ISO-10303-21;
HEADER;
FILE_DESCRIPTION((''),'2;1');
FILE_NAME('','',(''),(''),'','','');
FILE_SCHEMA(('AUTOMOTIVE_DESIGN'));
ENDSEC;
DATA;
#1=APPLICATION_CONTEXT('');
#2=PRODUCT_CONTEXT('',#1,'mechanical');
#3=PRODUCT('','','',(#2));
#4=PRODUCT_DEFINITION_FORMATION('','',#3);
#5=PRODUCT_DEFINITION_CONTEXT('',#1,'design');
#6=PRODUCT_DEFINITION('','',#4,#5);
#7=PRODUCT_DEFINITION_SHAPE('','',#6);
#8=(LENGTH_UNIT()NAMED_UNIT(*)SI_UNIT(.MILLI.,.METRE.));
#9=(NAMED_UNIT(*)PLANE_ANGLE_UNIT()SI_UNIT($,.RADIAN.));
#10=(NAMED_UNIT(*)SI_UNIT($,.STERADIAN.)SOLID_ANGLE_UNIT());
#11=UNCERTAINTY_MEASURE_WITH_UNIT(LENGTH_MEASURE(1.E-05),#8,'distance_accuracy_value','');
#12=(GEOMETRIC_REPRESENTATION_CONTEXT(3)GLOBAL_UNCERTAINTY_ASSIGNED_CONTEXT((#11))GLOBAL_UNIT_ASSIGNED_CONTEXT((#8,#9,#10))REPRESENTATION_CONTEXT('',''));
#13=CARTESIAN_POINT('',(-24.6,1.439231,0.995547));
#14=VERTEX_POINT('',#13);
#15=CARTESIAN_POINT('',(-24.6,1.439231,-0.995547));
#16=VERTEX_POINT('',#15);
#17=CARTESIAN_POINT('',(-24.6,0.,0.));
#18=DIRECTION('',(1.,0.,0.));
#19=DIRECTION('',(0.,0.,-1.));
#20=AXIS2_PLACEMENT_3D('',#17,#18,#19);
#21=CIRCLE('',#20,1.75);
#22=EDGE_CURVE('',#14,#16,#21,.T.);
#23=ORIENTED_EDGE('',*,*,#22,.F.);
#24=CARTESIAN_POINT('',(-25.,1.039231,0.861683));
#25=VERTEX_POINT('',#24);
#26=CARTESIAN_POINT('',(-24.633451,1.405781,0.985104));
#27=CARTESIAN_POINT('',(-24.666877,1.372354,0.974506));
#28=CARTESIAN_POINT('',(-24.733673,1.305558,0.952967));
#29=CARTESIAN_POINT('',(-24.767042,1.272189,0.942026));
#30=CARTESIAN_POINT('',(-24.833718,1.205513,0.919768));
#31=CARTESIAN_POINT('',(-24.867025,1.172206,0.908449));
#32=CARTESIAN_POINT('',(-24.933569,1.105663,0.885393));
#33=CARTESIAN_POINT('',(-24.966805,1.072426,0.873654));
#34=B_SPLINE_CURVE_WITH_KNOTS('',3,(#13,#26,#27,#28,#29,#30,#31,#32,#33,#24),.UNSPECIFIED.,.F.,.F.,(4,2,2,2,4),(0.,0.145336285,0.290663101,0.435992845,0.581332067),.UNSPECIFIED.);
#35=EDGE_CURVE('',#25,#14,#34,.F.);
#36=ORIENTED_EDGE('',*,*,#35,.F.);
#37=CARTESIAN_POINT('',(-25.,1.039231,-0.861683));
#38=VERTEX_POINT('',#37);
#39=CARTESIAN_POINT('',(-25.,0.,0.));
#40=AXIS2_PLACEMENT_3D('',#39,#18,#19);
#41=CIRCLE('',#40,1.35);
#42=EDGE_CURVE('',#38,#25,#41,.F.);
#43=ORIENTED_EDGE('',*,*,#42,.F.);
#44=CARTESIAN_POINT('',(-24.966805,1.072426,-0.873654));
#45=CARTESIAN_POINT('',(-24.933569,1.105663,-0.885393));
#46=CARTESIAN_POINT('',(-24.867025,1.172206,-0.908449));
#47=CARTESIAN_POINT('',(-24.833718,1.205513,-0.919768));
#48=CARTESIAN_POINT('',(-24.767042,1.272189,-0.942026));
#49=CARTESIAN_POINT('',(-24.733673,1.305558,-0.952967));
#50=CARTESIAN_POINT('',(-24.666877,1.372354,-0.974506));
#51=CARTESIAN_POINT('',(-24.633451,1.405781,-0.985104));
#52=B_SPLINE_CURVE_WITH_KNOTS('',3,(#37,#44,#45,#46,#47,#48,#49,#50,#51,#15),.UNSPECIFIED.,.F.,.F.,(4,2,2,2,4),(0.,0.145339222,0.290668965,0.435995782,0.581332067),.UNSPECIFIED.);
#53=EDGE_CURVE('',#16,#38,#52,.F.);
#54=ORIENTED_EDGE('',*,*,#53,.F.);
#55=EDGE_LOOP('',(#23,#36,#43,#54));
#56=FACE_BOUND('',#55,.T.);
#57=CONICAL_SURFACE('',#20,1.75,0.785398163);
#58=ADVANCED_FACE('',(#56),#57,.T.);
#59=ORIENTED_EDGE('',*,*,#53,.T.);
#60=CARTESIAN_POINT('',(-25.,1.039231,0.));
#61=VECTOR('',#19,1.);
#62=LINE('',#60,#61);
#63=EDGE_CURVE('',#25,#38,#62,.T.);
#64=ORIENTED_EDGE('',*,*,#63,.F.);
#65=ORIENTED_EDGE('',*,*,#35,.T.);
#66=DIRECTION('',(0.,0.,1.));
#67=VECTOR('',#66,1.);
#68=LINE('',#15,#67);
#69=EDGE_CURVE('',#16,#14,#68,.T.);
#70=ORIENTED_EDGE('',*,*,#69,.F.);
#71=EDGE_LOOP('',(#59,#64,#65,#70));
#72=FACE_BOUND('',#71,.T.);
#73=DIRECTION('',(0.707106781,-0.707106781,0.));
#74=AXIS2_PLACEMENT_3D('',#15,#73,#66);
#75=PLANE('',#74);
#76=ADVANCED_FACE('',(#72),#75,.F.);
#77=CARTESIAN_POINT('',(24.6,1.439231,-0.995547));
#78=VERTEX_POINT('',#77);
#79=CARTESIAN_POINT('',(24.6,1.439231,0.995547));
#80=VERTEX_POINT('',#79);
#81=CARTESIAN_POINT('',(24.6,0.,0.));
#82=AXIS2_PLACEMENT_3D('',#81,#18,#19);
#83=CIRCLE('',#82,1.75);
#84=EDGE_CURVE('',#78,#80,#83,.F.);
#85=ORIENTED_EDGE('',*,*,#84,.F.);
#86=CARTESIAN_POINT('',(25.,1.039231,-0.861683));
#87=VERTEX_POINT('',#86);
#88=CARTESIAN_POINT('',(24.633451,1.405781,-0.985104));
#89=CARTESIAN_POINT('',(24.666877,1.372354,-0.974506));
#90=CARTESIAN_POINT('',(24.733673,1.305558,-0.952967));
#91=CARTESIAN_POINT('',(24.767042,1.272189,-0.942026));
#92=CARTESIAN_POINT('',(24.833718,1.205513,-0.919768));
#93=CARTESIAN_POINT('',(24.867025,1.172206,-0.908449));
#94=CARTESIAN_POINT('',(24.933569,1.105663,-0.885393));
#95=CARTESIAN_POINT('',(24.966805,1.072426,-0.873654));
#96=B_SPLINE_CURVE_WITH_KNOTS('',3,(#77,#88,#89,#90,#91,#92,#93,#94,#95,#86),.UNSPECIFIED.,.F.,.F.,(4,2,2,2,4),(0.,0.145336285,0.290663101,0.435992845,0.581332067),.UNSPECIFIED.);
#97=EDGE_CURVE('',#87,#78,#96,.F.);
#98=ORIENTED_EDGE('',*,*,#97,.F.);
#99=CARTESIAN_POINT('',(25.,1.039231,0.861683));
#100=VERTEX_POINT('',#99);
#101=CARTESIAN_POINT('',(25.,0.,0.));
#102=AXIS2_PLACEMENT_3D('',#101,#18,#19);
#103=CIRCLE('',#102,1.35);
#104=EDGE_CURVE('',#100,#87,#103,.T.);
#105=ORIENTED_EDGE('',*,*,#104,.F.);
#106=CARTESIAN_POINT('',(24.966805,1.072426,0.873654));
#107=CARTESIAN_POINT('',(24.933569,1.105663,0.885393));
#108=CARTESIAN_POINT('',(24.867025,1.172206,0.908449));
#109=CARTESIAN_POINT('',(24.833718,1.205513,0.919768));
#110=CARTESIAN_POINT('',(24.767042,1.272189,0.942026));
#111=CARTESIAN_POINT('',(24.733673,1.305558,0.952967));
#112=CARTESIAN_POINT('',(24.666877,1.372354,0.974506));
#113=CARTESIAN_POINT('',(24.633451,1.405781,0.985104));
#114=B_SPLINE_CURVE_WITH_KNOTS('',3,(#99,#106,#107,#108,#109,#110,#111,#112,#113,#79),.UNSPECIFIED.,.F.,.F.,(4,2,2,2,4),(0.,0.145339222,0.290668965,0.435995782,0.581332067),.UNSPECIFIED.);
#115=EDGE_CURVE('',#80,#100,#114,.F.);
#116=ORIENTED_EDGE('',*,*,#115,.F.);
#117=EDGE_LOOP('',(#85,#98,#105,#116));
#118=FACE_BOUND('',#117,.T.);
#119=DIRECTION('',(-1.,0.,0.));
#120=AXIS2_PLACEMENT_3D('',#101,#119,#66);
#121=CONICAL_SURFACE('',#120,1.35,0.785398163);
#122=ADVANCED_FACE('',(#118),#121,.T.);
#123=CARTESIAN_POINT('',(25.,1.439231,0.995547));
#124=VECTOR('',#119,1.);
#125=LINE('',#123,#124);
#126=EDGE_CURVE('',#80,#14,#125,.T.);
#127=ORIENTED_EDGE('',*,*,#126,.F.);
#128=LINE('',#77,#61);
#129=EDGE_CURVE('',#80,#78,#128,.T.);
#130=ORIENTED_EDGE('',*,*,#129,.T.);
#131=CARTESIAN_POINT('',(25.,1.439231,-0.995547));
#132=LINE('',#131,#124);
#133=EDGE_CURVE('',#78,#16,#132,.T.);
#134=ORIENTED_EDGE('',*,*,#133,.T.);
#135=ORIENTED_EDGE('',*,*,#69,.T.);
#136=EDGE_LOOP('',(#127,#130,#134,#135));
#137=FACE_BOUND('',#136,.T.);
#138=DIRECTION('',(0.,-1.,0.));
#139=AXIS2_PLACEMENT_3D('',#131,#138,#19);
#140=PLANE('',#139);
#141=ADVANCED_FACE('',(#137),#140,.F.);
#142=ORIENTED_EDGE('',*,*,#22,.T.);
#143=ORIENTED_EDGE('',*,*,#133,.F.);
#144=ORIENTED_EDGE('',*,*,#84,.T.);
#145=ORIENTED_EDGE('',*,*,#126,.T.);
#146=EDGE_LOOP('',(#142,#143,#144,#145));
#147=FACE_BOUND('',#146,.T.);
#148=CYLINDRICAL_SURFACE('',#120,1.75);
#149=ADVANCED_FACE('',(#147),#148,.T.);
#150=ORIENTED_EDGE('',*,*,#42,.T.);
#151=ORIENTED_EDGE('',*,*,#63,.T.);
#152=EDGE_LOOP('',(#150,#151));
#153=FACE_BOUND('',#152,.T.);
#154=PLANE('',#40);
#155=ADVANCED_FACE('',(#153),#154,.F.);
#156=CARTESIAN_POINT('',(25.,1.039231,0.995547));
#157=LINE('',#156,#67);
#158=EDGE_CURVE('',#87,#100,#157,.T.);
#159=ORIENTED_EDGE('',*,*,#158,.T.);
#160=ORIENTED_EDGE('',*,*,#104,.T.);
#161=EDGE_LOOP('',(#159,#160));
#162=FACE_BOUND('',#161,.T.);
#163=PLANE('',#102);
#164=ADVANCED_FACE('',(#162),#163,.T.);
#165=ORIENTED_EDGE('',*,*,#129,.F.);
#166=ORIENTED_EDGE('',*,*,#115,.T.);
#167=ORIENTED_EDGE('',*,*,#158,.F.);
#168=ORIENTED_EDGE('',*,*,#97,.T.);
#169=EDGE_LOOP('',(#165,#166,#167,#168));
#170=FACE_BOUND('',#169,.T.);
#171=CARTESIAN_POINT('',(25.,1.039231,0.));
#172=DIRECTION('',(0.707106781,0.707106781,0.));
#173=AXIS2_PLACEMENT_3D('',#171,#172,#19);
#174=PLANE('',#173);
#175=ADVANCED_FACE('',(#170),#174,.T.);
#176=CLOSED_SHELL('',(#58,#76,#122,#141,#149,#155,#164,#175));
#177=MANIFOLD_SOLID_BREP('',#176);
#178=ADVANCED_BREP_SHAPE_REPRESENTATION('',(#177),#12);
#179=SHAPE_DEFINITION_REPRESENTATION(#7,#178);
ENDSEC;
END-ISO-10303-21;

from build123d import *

# Parameters (mm, degrees)
BOSS_EXTRUDE1_DEPTH = 25
CHAMFER1_SIZE       = 0.4


with BuildPart() as part:
    # Sketch1 → Boss-Extrude1 (new, symmetric)
    with BuildSketch(Plane(origin=(0, 0, 0), x_dir=(0, 0, -1), z_dir=(1, 0, 0))):
        with BuildLine():
            Line((0.995546671, 1.439231331), (-0.995546671, 1.439231331))
            ThreePointArc((-0.995546671, 1.439231331), (0, -1.75), (0.995546671, 1.439231331))
        make_face()
    extrude(amount=BOSS_EXTRUDE1_DEPTH, both=True)

    # Chamfer1
    # the kernel refuses this chamfer: 0.4 mm, written as the material it takes off along each edge
    with BuildSketch(Plane(origin=(-25, 1.439231331, -2.024219866), x_dir=(0.9996219169112966, 0.02749587661058634, 0), z_dir=(0, 0, 1))) as chamfer1_piece_1:
        Polygon((CHAMFER1_SIZE * 0.999621916911, -CHAMFER1_SIZE * 0.0274958766106), (-CHAMFER1_SIZE * 0.0274958766106, -CHAMFER1_SIZE * 0.999621916911), (0, 0), align=None)
    extrude(amount=4.048439733, mode=Mode.SUBTRACT)
    with BuildSketch(Plane(origin=(-25, 0, 0), x_dir=(0, 0.9998895110785412, 0.014864912886252453), z_dir=(0, 0.014864912886252453, -0.9998895110785412))) as chamfer1_piece_2:
        Polygon((1.75, CHAMFER1_SIZE), (1.75 - CHAMFER1_SIZE, 0), (1.75, 0), align=None)
    revolve(axis=Axis((-25, 0, 0), (1, 0, 0)), revolution_arc=358.296543719, mode=Mode.SUBTRACT)
    with BuildSketch(Plane(origin=(25, 0, 0), x_dir=(0, 0.9998895110785412, 0.014864912886252453), z_dir=(0, 0.014864912886252453, -0.9998895110785412))) as chamfer1_piece_3:
        Polygon((1.75 - CHAMFER1_SIZE, 0), (1.75, -CHAMFER1_SIZE), (1.75, 0), align=None)
    revolve(axis=Axis((25, 0, 0), (1, 0, 0)), revolution_arc=358.296543719, mode=Mode.SUBTRACT)
    with BuildSketch(Plane(origin=(25, 1.439231331, -2.024219866), x_dir=(-0.9996219169112966, 0.02749587661058634, 0), z_dir=(0, 0, 1))) as chamfer1_piece_4:
        Polygon((CHAMFER1_SIZE * 0.999621916911, CHAMFER1_SIZE * 0.0274958766106), (-CHAMFER1_SIZE * 0.0274958766106, CHAMFER1_SIZE * 0.999621916911), (0, 0), align=None)
    extrude(amount=4.048439733, mode=Mode.SUBTRACT)


solid = part.part
